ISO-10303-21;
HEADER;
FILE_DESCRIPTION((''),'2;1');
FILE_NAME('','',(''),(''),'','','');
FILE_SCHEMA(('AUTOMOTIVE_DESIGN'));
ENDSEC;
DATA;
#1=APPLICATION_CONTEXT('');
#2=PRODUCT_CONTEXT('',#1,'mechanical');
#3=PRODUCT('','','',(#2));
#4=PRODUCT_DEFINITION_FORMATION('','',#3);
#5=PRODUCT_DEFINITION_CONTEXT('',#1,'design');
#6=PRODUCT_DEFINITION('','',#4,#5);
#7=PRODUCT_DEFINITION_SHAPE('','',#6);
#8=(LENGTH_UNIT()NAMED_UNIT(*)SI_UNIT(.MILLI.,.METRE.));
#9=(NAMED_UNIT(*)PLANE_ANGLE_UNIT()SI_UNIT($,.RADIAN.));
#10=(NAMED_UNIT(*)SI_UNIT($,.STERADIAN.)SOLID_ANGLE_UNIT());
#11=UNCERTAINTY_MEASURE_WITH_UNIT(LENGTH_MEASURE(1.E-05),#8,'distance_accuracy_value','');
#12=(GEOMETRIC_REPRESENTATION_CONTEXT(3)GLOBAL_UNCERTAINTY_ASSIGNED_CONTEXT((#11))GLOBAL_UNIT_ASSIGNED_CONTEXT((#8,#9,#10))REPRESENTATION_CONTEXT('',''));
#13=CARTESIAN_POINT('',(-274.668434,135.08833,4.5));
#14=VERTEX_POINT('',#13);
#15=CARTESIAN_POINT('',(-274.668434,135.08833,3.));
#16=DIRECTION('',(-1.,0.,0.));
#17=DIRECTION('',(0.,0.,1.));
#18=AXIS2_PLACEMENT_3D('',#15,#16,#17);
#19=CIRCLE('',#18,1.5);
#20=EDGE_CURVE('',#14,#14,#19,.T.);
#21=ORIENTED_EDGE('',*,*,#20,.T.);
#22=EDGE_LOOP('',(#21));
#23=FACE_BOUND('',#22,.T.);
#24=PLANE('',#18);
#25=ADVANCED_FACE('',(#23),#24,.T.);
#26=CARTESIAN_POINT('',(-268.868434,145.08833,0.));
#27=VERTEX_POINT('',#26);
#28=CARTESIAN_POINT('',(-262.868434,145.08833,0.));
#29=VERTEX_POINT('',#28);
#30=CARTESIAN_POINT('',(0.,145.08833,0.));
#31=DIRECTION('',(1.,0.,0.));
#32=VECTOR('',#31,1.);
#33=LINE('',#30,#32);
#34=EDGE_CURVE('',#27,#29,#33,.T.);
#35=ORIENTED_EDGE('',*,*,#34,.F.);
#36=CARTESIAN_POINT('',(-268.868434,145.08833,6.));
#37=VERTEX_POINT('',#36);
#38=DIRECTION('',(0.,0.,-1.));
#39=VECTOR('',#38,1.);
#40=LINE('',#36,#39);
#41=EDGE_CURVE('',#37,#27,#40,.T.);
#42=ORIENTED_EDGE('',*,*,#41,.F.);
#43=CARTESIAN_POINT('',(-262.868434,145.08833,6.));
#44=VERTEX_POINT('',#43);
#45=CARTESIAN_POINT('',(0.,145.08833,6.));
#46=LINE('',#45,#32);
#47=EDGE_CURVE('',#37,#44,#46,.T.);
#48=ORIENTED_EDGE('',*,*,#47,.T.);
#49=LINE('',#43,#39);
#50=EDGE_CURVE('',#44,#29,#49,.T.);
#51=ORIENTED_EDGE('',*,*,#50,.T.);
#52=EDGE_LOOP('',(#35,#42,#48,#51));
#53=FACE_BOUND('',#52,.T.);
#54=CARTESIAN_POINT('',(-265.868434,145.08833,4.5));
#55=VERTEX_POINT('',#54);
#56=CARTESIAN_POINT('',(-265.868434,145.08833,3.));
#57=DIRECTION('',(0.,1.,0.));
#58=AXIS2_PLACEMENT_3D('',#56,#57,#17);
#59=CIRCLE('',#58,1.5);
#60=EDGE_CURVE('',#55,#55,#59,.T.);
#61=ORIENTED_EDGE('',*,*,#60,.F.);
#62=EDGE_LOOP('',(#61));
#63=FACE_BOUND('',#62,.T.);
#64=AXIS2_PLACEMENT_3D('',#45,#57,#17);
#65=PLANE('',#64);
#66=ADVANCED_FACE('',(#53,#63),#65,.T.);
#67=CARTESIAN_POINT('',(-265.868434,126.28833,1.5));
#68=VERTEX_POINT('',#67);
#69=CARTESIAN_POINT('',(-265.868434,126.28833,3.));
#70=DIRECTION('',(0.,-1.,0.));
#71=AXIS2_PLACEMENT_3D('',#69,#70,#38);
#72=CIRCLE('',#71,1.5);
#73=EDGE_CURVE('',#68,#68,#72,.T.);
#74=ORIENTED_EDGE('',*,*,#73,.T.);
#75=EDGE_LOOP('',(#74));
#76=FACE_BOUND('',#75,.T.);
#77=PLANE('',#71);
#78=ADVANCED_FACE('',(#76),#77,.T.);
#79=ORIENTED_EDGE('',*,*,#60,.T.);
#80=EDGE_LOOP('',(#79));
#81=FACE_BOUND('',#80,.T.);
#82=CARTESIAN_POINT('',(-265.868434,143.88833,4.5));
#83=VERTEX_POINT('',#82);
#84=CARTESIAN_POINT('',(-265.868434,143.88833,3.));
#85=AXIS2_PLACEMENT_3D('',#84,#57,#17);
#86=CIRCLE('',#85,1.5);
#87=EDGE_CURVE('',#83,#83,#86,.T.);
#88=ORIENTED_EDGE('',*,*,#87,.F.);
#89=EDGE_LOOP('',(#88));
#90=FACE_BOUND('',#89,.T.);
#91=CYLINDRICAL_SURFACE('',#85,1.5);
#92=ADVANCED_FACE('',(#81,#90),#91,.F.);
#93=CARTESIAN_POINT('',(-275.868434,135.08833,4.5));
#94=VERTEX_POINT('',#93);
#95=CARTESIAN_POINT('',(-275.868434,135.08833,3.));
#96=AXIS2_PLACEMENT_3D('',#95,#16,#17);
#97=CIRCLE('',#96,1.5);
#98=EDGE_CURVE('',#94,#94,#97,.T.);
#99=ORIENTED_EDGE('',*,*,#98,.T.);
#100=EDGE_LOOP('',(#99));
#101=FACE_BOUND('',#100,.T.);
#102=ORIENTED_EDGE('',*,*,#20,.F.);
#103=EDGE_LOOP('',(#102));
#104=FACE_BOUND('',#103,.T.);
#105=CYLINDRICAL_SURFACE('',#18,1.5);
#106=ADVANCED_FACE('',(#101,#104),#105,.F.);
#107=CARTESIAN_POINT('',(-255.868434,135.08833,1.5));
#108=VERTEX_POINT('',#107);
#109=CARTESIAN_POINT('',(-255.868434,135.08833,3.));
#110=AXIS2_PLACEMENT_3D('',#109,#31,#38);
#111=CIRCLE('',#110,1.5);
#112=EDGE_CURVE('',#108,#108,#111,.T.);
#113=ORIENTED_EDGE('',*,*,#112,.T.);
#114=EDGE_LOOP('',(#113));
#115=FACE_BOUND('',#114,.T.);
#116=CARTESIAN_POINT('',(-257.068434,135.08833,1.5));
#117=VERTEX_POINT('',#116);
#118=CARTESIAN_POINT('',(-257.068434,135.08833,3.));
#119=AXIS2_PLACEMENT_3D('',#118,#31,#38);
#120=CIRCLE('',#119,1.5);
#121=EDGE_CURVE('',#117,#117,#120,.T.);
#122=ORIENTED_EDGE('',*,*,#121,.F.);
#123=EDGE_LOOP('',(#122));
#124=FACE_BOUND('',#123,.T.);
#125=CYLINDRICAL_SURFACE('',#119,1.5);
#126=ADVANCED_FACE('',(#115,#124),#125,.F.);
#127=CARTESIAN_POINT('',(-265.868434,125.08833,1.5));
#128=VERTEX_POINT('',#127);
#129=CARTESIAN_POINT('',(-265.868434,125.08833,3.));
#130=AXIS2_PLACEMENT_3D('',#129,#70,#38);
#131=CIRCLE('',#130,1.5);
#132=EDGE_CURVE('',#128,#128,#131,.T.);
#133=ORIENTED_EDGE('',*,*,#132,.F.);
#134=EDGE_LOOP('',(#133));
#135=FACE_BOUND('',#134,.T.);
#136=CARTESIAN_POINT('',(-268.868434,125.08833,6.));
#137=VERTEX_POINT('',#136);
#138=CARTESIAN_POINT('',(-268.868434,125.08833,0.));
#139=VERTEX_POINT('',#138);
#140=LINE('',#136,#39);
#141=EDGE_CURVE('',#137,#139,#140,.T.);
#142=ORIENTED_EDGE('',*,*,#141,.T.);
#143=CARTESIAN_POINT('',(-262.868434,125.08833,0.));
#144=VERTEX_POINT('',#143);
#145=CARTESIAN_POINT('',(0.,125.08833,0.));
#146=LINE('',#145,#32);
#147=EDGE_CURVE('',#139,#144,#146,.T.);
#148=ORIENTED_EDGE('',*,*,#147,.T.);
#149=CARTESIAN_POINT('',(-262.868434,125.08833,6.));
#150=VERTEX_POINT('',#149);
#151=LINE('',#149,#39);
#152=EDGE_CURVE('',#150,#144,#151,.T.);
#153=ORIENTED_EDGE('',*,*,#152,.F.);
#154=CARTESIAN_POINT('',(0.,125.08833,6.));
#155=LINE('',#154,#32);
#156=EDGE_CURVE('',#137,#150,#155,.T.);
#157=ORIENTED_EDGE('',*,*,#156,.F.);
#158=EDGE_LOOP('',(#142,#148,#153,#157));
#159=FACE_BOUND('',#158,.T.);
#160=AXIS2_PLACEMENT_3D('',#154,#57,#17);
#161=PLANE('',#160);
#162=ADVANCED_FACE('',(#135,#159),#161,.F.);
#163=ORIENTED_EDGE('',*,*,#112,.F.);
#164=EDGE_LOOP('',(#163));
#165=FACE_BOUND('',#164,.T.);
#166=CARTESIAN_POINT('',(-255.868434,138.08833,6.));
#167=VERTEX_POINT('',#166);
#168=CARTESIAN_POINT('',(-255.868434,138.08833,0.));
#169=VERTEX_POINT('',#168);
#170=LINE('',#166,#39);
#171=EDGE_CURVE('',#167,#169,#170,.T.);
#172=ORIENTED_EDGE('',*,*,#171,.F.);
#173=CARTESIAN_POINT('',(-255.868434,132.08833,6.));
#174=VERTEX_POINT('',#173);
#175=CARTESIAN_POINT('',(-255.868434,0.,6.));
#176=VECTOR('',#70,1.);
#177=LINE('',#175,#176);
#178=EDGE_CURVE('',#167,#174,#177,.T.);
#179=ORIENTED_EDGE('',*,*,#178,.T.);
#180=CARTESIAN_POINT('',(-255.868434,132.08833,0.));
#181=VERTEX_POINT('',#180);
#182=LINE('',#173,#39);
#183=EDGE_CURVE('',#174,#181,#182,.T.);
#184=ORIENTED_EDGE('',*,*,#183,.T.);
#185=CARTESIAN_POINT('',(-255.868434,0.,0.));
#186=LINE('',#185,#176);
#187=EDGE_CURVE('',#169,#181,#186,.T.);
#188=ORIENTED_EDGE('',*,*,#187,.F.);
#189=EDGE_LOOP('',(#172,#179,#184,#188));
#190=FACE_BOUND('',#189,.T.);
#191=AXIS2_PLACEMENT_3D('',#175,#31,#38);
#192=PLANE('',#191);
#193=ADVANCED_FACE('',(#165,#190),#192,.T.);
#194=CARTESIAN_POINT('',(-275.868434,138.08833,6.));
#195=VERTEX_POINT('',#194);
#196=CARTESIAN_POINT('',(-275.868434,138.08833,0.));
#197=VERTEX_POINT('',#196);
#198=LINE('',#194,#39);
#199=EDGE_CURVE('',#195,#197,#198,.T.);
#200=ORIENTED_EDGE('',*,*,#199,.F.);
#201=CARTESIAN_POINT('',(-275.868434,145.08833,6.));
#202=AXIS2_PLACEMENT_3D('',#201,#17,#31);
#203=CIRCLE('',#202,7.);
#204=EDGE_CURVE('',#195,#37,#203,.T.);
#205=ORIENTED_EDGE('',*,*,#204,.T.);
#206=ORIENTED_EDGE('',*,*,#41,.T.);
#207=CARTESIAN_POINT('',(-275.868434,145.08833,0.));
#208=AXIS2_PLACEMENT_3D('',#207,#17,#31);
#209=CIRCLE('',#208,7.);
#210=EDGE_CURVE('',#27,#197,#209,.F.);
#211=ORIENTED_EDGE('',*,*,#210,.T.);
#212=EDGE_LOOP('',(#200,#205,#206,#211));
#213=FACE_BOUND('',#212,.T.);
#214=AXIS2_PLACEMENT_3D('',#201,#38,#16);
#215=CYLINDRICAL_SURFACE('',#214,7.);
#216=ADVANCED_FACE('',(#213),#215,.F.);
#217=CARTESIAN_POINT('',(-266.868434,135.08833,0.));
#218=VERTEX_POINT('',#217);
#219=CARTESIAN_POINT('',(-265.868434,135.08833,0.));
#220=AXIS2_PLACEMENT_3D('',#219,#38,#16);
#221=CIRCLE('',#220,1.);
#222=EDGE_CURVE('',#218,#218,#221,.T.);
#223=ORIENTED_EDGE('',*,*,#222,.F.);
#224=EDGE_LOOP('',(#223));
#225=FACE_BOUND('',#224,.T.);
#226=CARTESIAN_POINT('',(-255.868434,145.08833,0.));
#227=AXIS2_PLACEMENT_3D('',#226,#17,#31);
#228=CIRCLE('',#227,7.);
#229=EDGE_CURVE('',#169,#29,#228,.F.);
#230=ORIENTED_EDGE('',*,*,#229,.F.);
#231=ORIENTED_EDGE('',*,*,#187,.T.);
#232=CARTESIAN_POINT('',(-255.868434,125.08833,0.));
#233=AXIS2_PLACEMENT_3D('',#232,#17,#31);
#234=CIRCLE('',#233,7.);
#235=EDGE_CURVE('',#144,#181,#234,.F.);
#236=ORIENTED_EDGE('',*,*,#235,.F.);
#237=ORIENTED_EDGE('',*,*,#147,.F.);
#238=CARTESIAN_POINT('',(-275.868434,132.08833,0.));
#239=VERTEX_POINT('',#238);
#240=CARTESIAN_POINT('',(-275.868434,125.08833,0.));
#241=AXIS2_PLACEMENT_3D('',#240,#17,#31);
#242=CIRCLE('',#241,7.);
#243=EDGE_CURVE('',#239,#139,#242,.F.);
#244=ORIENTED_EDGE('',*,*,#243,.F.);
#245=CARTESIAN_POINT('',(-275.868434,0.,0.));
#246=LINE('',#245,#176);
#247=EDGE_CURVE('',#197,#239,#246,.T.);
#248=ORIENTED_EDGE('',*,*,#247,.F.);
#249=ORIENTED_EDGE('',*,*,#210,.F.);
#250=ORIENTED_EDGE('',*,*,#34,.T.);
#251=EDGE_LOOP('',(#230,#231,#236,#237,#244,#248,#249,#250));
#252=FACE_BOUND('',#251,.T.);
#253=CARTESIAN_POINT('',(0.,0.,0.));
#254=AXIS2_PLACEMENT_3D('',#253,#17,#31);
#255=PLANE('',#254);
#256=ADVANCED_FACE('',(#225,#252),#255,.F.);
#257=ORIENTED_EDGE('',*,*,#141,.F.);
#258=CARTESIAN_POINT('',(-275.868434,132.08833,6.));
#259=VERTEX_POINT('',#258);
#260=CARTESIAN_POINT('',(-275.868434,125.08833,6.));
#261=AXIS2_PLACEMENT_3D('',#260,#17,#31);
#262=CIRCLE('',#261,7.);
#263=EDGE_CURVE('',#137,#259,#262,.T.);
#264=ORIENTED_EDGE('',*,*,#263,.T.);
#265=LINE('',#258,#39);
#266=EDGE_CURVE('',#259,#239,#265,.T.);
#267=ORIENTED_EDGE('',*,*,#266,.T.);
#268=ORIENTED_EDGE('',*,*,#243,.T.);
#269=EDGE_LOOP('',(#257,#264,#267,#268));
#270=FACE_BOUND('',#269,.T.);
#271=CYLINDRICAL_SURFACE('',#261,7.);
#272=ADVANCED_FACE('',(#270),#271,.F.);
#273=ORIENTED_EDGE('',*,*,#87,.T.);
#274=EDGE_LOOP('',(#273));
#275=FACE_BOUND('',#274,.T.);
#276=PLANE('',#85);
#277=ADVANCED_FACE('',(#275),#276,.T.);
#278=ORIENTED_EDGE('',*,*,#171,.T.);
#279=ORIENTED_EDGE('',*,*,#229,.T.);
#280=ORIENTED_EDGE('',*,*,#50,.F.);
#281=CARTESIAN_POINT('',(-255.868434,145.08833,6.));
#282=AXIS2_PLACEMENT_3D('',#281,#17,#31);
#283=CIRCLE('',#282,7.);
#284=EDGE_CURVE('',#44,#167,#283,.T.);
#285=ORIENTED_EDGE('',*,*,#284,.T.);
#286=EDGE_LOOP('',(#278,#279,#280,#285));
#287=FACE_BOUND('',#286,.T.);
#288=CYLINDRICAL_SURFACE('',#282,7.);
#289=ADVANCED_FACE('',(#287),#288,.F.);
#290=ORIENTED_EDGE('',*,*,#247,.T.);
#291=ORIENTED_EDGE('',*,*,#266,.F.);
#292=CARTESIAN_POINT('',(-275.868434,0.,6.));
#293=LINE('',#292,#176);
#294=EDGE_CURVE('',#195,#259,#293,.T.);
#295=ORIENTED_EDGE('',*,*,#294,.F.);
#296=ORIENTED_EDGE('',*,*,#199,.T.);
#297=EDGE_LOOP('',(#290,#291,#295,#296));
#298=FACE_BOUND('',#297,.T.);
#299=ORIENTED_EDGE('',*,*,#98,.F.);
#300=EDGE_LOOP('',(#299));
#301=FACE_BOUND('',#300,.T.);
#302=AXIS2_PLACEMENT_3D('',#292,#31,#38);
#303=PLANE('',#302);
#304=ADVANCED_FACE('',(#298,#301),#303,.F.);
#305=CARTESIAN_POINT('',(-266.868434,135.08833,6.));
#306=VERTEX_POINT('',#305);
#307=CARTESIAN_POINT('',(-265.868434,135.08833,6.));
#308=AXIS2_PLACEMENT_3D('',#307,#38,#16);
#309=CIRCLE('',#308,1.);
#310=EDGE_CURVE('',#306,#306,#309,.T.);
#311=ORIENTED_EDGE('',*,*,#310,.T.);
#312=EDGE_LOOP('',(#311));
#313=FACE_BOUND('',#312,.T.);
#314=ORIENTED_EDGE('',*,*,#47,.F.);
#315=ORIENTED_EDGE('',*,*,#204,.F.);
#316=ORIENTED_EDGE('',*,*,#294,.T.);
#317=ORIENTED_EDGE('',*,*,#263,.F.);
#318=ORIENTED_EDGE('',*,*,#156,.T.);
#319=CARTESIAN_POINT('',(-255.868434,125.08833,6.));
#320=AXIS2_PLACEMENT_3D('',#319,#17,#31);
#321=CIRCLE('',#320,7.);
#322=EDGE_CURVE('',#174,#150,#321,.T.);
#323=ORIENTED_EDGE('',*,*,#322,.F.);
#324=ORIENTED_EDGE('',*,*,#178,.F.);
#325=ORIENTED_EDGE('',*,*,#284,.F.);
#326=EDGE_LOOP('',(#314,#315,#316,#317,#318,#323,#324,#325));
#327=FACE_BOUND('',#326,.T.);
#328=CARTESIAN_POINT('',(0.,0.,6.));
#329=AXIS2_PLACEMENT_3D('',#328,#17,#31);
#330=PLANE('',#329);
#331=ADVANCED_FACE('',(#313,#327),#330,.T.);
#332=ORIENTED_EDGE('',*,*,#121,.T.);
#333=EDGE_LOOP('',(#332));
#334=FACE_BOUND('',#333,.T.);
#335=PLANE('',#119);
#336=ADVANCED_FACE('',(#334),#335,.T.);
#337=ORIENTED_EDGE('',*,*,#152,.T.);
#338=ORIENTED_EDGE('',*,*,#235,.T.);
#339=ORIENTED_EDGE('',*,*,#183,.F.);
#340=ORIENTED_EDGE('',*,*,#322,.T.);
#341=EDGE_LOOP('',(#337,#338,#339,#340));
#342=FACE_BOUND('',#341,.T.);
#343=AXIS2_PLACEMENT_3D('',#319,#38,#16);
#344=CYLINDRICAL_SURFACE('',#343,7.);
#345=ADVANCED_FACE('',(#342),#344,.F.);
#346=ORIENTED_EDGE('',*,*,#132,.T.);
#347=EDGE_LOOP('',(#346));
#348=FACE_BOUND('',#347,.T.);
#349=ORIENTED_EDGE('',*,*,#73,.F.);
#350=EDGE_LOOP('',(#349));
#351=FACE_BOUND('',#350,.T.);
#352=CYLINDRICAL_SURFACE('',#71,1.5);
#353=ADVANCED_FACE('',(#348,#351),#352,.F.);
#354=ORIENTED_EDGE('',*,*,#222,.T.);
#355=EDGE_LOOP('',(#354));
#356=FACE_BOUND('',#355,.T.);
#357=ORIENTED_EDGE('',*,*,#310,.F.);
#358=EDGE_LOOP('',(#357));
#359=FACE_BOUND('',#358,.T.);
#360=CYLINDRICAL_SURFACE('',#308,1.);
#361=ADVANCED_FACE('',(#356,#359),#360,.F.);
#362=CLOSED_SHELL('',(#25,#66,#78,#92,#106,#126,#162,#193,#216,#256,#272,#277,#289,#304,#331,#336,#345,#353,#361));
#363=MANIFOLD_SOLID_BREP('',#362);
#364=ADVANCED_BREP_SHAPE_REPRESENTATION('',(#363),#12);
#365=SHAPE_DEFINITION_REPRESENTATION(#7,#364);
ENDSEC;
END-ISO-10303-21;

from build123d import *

# Parameters (mm, degrees)
SKETCH10_W          = 7
SKETCH10_H          = 6
SKETCH10_W_2        = 6
SKETCH10_H_2        = 7
BOSS_EXTRUDE4_DEPTH = 6
SKETCH11_R          = 1.5
CUT_EXTRUDE3_DEPTH  = 1.2
SKETCH14_R          = 1.5
CUT_EXTRUDE4_DEPTH  = 1.2
CUT_EXTRUDE5_START  = -1.2
SKETCH15_R          = 1.5
CUT_EXTRUDE5_DEPTH  = 1.2
CUT_EXTRUDE7_START  = -1.2
SKETCH16_R          = 1.5
CUT_EXTRUDE7_DEPTH  = 1.2
FILLET1_R           = 7
FILLET2_R           = 7
FILLET3_R           = 7
FILLET4_R           = 7
SKETCH17_R          = 1
CUT_EXTRUDE8_DEPTH  = 6


with BuildPart() as part:
    # Sketch10 → Boss-Extrude4 (new body)
    with BuildSketch(Plane.XY):
        with Locations((-272.368433777, 135.088329622)):
            Rectangle(SKETCH10_W, SKETCH10_H)
        with Locations((-265.868433777, 128.588329622)):
            Rectangle(SKETCH10_W_2, SKETCH10_H_2)
        with Locations((-259.368433777, 135.088329622)):
            Rectangle(SKETCH10_W, SKETCH10_H)
        with Locations((-265.868433777, 135.088329622)):
            Rectangle(SKETCH10_W_2, SKETCH10_H)
        with Locations((-265.868433777, 141.588329622)):
            Rectangle(SKETCH10_W_2, SKETCH10_H_2)
    extrude(amount=BOSS_EXTRUDE4_DEPTH)

    # Sketch11 → Cut-Extrude3 (cut)
    with BuildSketch(Plane(origin=(0, 145.088329622, 0), x_dir=(1, 0, 0), z_dir=(0, 1, 0))):
        with Locations(Location((-265.868433777, -3, 0), (0, 0, 270))):
            Circle(SKETCH11_R)
    extrude(amount=-CUT_EXTRUDE3_DEPTH, mode=Mode.SUBTRACT)

    # Sketch14 → Cut-Extrude4 (cut)
    with BuildSketch(Plane.ZY.offset(275.868433777)):
        with Locations((3, 135.088329622)):
            Circle(SKETCH14_R)
    extrude(amount=-CUT_EXTRUDE4_DEPTH, mode=Mode.SUBTRACT)

    # Sketch15 → Cut-Extrude5 (cut)
    with BuildSketch(Plane(origin=(0, 125.088329622, 0), x_dir=(-1, 0, 0), z_dir=(0, -1, 0)).offset(CUT_EXTRUDE5_START)):
        with Locations(Location((265.868433777, -3, 0), (0, 0, 270))):
            Circle(SKETCH15_R)
    extrude(amount=CUT_EXTRUDE5_DEPTH, mode=Mode.SUBTRACT)

    # Sketch16 → Cut-Extrude7 (cut)
    with BuildSketch(Plane(origin=(-255.868433777, 0, 0), x_dir=(0, 0, -1), z_dir=(1, 0, 0)).offset(CUT_EXTRUDE7_START)):
        with Locations(Location((-3, 135.088329622, 0), (0, 0, 180))):
            Circle(SKETCH16_R)
    extrude(amount=CUT_EXTRUDE7_DEPTH, mode=Mode.SUBTRACT)

    # Fillet1
    fillet1_edges = [part.edges().sort_by_distance(p)[0] for p in [
        (-262.868433777, 138.088329622, 3),
    ]]
    fillet(fillet1_edges, radius=FILLET1_R - 0.0001)  # a hair under: the kernel refuses the full size

    # Fillet2
    fillet2_edges = [part.edges().sort_by_distance(p)[0] for p in [
        (-268.868433777, 138.088329622, 3),
    ]]
    fillet(fillet2_edges, radius=FILLET2_R - 0.0001)  # a hair under: the kernel refuses the full size

    # Fillet3
    fillet3_edges = [part.edges().sort_by_distance(p)[0] for p in [
        (-268.868433777, 132.088329622, 3),
    ]]
    fillet(fillet3_edges, radius=FILLET3_R - 0.0001)  # a hair under: the kernel refuses the full size

    # Fillet4
    fillet4_edges = [part.edges().sort_by_distance(p)[0] for p in [
        (-262.868433777, 132.088329622, 3),
    ]]
    fillet(fillet4_edges, radius=FILLET4_R - 0.0001)  # a hair under: the kernel refuses the full size

    # Sketch17 → Cut-Extrude8 (cut)
    with BuildSketch(Plane(origin=(0, 0, 0), x_dir=(-1, 0, 0), z_dir=(0, 0, -1))):
        with Locations((265.868433777, 135.088329622)):
            Circle(SKETCH17_R)
    extrude(amount=-CUT_EXTRUDE8_DEPTH, mode=Mode.SUBTRACT)


solid = part.part
